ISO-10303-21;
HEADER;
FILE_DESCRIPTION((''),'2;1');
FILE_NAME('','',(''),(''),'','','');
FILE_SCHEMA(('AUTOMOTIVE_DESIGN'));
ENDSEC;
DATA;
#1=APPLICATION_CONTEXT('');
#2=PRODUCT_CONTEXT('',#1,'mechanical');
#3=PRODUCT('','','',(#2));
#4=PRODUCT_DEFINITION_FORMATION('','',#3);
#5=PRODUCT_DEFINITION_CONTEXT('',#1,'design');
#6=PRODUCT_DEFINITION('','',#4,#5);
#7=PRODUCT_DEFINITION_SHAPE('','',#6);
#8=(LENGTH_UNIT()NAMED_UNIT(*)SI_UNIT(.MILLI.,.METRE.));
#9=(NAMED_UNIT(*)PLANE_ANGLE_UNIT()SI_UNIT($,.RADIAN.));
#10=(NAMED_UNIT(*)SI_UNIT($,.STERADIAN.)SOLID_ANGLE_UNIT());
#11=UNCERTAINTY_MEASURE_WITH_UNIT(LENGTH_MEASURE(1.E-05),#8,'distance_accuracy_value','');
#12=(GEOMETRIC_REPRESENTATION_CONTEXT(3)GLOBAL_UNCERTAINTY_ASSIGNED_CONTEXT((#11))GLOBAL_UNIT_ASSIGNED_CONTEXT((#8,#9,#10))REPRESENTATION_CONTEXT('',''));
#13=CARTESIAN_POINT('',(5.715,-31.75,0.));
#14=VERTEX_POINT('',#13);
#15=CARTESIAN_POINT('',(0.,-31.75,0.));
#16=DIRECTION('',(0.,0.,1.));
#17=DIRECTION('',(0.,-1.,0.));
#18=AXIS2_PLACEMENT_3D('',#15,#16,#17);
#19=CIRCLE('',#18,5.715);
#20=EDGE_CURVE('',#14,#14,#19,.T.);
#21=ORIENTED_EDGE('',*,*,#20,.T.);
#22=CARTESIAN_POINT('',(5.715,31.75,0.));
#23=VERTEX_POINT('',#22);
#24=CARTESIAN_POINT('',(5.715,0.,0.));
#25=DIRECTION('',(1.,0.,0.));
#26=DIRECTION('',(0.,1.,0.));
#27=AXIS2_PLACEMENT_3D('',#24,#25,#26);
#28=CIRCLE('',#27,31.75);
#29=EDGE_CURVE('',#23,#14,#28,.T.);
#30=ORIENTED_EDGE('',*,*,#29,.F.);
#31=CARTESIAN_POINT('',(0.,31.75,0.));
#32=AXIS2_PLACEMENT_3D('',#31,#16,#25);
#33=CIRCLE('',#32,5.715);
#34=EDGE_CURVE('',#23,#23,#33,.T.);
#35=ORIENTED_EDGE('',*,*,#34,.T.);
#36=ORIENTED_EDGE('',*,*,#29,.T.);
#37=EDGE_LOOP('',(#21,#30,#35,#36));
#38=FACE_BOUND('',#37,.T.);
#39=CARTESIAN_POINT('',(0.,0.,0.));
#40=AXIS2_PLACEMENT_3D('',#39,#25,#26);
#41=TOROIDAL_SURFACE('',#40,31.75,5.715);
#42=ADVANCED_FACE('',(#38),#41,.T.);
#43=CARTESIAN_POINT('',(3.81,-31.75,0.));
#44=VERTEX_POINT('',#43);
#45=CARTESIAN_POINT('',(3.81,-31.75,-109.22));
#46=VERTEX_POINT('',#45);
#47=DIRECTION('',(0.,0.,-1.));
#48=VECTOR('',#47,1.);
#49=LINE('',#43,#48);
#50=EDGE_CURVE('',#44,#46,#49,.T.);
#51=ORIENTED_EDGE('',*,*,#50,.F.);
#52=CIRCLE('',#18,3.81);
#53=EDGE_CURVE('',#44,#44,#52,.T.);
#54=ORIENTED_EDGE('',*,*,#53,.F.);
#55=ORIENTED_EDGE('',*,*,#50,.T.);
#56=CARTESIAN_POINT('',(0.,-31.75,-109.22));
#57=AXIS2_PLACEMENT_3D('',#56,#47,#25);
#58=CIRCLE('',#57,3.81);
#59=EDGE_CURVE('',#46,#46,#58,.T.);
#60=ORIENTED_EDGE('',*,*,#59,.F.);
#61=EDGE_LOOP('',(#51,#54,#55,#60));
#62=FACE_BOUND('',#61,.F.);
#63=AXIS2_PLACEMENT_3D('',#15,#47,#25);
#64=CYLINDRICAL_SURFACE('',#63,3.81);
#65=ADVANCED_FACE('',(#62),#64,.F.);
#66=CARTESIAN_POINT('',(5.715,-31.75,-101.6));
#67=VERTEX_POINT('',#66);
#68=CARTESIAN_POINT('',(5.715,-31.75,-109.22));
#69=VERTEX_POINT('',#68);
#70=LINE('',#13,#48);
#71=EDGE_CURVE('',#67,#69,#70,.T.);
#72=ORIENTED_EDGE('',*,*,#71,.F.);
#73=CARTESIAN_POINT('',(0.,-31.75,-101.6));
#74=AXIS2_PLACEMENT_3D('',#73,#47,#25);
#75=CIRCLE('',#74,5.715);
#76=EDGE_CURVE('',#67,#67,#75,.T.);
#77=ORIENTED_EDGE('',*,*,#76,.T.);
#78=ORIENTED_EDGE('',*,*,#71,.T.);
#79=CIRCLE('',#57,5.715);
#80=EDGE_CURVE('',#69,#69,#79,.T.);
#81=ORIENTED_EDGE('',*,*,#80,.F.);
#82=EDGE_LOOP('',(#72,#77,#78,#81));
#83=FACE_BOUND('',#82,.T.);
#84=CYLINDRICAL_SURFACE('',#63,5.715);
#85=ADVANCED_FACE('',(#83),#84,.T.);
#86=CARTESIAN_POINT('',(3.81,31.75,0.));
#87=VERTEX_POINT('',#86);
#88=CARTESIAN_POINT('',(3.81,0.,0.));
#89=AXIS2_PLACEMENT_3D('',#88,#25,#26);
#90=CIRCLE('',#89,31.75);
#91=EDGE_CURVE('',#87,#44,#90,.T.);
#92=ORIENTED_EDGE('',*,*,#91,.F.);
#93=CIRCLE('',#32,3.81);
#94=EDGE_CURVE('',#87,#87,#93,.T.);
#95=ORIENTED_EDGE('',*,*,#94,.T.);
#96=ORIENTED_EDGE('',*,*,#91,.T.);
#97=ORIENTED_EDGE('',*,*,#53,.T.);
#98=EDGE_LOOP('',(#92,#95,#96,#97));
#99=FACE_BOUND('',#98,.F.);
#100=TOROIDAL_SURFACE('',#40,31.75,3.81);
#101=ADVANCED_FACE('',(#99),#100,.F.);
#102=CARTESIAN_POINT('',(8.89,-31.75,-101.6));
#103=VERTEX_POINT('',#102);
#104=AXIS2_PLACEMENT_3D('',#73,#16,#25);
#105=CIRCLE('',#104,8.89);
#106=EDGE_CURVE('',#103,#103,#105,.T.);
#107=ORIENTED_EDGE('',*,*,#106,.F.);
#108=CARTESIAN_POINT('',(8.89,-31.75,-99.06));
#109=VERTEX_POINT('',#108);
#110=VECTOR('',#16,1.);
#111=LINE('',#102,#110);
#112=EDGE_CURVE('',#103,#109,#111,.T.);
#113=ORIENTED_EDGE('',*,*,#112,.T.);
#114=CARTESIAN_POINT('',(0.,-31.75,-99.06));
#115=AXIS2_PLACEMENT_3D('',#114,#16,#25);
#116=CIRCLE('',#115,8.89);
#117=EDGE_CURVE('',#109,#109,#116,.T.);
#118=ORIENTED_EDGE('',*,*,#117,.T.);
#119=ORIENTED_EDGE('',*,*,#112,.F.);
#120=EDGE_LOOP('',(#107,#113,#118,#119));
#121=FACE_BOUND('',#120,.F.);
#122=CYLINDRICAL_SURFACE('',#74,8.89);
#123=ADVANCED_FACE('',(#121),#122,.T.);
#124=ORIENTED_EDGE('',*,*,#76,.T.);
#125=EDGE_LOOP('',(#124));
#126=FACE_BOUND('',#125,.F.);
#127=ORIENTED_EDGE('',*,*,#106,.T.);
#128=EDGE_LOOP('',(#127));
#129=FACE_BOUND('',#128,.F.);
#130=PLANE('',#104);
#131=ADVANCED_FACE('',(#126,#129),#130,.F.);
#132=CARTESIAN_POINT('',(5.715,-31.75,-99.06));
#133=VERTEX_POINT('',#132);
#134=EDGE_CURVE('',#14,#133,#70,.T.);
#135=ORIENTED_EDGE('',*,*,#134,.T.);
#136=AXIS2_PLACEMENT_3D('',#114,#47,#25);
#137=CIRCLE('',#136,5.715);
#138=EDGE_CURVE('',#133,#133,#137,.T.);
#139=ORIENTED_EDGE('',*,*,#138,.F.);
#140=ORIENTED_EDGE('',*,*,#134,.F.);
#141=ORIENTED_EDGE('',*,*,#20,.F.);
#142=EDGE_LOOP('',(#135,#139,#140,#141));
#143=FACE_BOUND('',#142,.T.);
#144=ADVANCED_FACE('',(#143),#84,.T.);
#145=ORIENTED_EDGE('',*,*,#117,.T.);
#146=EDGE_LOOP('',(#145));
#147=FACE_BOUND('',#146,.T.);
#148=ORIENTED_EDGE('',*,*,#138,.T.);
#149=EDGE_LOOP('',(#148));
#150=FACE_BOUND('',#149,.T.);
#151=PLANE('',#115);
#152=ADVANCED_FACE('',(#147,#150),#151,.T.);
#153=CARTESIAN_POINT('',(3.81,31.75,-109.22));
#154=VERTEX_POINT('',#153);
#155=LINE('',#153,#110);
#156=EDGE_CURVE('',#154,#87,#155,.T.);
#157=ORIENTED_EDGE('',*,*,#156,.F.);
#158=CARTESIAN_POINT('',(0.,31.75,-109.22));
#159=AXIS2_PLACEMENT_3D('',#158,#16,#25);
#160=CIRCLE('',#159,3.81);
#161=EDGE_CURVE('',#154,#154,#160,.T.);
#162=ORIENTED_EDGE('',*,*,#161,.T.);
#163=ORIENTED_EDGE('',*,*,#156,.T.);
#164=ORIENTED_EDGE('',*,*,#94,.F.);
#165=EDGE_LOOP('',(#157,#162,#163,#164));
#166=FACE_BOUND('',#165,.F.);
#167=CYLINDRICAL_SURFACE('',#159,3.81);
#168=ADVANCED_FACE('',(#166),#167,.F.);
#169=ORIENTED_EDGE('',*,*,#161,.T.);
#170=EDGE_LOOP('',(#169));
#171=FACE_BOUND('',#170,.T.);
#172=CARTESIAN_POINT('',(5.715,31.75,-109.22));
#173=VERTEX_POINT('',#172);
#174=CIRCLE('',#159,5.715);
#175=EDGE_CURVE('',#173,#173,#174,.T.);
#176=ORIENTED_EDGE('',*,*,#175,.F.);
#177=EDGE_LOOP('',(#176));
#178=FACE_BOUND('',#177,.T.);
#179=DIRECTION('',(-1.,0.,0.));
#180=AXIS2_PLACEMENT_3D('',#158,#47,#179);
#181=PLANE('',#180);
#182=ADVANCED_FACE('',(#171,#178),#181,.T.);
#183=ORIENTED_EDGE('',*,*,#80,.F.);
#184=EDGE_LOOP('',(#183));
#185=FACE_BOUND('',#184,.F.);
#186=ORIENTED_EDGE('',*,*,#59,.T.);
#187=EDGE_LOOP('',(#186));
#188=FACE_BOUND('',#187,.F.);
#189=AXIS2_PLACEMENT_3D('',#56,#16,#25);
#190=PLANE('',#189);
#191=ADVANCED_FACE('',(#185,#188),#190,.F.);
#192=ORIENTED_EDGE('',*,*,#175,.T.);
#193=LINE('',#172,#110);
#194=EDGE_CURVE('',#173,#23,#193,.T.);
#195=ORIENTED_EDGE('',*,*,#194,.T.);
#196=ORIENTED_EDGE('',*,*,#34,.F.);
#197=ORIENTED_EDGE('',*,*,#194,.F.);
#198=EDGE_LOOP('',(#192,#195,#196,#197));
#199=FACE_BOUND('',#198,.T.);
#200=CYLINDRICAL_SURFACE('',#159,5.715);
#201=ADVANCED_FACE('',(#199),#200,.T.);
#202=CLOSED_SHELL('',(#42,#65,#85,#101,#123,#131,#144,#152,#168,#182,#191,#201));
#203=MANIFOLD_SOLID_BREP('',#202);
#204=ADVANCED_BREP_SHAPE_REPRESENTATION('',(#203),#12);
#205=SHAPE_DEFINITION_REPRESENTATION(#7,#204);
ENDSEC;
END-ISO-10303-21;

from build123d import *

# Parameters (mm, degrees)
F1_R     = 5.715
F1_R_2   = 3.81
F4_R     = 8.89
F4_R_2   = 4.360362463
F5_DEPTH = 2.54


with BuildPart() as f2:
    # F2: sweep along a path in F0
    with BuildLine(Plane.YZ) as f2_path:
        Line((31.75, -109.22), (31.75, 0))
        ThreePointArc((31.75, 0), (0, 31.75), (-31.75, 0))
        Line((-31.75, 0), (-31.75, -109.22))
    # F1 (on Top) → F2 (sweep)
    with BuildSketch(Plane.XY):
        with Locations((0, -31.75)):
            Circle(F1_R)
        with Locations((0, -31.75)):
            Circle(F1_R_2, mode=Mode.SUBTRACT)
    sweep(path=f2_path.line)

    # F4 (on offset) → F5 (join)
    with BuildSketch(Plane.XY.offset(-101.6)):
        with Locations((0, -31.75)):
            Circle(F4_R)
        with Locations((0, -31.75)):
            Circle(F4_R_2, mode=Mode.SUBTRACT)
    extrude(amount=F5_DEPTH)


solid = f2.part
